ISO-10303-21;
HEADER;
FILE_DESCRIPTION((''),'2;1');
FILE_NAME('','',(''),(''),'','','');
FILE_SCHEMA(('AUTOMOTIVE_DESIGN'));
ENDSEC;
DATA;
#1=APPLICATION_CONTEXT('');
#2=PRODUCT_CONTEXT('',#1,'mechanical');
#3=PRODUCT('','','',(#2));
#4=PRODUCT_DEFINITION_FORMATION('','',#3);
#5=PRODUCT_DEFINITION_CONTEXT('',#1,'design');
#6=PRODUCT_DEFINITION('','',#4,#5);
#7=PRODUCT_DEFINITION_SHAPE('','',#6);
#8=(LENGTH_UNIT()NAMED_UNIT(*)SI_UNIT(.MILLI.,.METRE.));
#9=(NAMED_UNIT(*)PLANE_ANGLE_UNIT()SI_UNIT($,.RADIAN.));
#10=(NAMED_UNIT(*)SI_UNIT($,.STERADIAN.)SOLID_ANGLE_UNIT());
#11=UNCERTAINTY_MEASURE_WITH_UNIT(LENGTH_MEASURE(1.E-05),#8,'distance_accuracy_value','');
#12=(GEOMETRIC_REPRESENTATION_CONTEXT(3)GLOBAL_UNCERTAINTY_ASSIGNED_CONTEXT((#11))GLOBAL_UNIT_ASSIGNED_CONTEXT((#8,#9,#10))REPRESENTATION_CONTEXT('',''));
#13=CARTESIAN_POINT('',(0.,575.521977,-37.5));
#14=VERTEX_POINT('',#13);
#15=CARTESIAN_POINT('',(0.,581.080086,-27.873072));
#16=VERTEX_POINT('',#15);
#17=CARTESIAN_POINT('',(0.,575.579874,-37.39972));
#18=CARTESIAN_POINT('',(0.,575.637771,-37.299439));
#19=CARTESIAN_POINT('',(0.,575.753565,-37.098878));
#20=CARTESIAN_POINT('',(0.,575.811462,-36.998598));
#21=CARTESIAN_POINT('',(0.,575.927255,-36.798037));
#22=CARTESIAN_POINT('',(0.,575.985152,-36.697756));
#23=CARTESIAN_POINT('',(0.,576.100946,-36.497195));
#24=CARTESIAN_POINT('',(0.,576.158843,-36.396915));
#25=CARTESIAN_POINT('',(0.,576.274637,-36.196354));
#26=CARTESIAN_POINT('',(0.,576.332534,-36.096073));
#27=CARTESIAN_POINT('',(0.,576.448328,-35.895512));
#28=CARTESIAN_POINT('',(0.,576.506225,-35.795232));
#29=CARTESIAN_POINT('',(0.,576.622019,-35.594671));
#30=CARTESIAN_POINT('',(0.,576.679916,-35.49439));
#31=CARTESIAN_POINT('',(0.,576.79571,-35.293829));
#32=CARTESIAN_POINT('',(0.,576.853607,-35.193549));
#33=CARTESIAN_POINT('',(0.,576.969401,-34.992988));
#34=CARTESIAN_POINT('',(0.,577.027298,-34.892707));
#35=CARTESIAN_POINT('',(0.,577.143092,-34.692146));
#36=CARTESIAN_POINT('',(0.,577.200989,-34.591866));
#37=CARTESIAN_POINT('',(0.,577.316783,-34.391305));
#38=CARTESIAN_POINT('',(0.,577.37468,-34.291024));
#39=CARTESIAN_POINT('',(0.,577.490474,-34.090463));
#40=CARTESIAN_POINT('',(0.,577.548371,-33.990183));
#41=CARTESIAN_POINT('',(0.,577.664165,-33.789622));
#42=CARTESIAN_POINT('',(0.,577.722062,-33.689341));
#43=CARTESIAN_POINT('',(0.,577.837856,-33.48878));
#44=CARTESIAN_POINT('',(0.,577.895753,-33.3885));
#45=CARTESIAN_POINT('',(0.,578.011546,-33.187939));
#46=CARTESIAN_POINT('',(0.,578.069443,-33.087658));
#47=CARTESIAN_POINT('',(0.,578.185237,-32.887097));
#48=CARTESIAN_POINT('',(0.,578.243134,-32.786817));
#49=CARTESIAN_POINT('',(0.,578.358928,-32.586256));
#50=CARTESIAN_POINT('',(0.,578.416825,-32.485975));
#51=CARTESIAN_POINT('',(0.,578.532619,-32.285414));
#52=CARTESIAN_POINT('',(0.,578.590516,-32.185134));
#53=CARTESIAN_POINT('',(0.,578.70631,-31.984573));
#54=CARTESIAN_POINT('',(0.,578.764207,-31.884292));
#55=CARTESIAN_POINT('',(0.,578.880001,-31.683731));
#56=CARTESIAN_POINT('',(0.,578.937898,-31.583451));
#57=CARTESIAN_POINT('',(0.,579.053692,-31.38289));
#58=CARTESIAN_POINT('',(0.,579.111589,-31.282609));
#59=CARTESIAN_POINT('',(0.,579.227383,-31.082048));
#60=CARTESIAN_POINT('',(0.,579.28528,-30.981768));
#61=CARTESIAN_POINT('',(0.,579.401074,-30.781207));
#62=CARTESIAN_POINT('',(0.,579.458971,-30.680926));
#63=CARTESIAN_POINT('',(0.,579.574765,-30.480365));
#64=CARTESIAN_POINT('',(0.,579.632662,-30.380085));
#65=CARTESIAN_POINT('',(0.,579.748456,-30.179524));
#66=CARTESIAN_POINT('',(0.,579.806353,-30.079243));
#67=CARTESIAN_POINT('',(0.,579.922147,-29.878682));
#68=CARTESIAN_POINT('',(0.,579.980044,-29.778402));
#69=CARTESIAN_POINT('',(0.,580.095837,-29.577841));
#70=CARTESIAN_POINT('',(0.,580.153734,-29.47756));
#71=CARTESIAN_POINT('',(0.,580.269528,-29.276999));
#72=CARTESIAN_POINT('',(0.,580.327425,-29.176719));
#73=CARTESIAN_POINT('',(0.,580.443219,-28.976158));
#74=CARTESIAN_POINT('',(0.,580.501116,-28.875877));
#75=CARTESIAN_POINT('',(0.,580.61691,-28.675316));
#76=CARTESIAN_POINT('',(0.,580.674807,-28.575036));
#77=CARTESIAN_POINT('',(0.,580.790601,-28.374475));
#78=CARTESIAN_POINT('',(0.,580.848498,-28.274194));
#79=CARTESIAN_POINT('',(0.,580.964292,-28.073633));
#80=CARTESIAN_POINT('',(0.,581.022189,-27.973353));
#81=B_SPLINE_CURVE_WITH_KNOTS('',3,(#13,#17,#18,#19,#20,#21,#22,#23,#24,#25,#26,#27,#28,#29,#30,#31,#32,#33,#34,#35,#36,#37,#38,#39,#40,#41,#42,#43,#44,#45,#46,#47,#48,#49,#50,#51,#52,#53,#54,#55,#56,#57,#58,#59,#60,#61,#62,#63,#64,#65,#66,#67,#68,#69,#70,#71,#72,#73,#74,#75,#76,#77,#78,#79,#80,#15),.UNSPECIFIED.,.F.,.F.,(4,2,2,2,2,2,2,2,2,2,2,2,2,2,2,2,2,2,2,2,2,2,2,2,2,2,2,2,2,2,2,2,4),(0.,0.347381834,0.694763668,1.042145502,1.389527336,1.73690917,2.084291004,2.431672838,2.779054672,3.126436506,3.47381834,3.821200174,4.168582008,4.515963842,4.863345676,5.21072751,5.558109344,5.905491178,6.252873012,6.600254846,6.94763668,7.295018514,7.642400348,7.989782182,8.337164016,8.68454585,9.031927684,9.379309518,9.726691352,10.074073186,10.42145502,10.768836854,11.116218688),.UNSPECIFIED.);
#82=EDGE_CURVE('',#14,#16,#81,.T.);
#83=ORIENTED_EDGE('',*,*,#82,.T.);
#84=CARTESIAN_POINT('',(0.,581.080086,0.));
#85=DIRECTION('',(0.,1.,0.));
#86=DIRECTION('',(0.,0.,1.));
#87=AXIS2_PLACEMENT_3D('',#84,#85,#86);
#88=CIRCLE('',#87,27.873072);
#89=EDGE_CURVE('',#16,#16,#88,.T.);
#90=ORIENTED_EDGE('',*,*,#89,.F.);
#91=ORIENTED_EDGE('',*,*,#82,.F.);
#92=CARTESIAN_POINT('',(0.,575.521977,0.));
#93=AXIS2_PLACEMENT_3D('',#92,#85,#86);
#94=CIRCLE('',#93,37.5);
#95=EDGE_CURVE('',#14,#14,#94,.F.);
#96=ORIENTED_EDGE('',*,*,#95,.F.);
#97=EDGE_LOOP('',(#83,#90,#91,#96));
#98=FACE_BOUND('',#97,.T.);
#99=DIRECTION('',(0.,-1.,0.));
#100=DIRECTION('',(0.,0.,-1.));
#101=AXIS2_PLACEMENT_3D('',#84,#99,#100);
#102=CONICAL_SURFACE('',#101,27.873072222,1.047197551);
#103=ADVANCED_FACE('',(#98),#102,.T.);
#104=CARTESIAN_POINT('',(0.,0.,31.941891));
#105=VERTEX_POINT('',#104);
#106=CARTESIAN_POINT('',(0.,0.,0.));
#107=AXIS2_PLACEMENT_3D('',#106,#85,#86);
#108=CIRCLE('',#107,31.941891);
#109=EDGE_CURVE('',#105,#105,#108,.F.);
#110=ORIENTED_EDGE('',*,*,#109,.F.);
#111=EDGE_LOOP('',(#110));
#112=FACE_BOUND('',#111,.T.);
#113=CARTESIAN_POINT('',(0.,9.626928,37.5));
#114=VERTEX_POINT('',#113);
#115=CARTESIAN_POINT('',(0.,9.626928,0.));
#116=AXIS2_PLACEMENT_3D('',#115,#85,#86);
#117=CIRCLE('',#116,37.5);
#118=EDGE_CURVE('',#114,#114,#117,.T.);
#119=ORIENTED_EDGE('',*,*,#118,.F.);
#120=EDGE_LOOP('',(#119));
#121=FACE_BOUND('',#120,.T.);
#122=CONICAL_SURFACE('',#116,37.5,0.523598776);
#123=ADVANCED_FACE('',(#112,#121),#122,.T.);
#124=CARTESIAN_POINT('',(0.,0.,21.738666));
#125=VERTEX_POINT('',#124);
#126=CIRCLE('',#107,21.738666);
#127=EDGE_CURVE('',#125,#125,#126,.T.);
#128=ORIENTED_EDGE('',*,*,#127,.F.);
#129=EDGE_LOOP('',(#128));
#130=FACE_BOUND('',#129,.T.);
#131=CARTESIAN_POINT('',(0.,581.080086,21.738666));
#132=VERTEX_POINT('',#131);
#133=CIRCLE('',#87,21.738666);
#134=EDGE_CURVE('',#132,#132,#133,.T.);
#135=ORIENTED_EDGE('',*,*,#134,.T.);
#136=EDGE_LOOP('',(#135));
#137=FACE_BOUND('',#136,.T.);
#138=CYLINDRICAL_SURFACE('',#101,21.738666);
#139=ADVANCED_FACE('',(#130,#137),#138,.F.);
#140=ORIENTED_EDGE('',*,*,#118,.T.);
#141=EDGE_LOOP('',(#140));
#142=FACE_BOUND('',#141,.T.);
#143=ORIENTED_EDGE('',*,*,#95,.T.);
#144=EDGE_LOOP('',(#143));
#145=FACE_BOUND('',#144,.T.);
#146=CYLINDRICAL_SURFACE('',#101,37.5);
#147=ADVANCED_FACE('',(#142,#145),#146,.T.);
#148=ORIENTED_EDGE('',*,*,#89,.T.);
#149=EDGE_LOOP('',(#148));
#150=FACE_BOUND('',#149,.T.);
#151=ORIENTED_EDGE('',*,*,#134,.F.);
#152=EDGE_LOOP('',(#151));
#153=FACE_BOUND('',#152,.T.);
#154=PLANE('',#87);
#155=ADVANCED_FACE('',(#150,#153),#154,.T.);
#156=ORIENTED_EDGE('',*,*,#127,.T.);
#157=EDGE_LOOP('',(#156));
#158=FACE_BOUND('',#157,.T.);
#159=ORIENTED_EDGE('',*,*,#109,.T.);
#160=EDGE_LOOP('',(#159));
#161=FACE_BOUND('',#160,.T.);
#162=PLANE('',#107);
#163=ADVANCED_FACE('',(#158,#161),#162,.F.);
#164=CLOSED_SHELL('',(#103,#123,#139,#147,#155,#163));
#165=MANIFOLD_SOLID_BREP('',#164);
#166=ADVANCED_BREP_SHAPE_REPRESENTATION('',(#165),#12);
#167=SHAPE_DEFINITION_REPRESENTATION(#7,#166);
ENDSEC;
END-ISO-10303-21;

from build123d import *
from OCP.BRepFilletAPI import BRepFilletAPI_MakeChamfer

# Parameters (mm, degrees)
SKETCH1_R           = 37.5
BOSS_EXTRUDE1_DEPTH = 581.080085999
SKETCH2_R           = 21.738666332
CUT_EXTRUDE1_DEPTH  = 584.495129667
CHAMFER1_SIZE       = 5.558109344
CHAMFER1_SIZE2      = 9.626927778


with BuildPart() as part:
    # Sketch1 → Boss-Extrude1 (new body)
    with BuildSketch(Plane(origin=(0, 0, 0), x_dir=(1, 0, 0), z_dir=(0, 1, 0))):
        Circle(SKETCH1_R)
    extrude(amount=BOSS_EXTRUDE1_DEPTH)

    # Sketch2 → Cut-Extrude1 (cut, through all)
    with BuildSketch(Plane(origin=(0, 0, 0), x_dir=(1, 0, 0), z_dir=(0, 1, 0))):
        Circle(SKETCH2_R)
    extrude(amount=CUT_EXTRUDE1_DEPTH, mode=Mode.SUBTRACT)

    # Chamfer1: one chamfer whose edges measure the first distance from different faces: ONE call of the kernel's chamfer builder (chamfer() names one face for all edges)
    chamfer1_edges_1 = [part.edges().sort_by_distance(p)[0] for p in [
        (-37.5, 581.080085999, 0),
    ]]
    chamfer1_side_1 = [part.faces().sort_by_distance(p)[0] for p in [
        (-37.5, 290.540043, 0),
    ]]
    chamfer1_edges_2 = [part.edges().sort_by_distance(p)[0] for p in [
        (-37.5, 0, 0),
    ]]
    chamfer1_side_2 = [part.faces().sort_by_distance(p)[0] for p in [
        (-36.439339828, 0, 0),
    ]]
    chamfer1 = BRepFilletAPI_MakeChamfer(part.part.solid().wrapped)
    for e in chamfer1_edges_1:
        chamfer1.Add(CHAMFER1_SIZE, CHAMFER1_SIZE2, e.wrapped, chamfer1_side_1[0].wrapped)  # the first distance lies on this face
    for e in chamfer1_edges_2:
        chamfer1.Add(CHAMFER1_SIZE, CHAMFER1_SIZE2, e.wrapped, chamfer1_side_2[0].wrapped)  # the first distance lies on this face
    add(Compound.cast(chamfer1.Shape()), mode=Mode.REPLACE)


solid = part.part
